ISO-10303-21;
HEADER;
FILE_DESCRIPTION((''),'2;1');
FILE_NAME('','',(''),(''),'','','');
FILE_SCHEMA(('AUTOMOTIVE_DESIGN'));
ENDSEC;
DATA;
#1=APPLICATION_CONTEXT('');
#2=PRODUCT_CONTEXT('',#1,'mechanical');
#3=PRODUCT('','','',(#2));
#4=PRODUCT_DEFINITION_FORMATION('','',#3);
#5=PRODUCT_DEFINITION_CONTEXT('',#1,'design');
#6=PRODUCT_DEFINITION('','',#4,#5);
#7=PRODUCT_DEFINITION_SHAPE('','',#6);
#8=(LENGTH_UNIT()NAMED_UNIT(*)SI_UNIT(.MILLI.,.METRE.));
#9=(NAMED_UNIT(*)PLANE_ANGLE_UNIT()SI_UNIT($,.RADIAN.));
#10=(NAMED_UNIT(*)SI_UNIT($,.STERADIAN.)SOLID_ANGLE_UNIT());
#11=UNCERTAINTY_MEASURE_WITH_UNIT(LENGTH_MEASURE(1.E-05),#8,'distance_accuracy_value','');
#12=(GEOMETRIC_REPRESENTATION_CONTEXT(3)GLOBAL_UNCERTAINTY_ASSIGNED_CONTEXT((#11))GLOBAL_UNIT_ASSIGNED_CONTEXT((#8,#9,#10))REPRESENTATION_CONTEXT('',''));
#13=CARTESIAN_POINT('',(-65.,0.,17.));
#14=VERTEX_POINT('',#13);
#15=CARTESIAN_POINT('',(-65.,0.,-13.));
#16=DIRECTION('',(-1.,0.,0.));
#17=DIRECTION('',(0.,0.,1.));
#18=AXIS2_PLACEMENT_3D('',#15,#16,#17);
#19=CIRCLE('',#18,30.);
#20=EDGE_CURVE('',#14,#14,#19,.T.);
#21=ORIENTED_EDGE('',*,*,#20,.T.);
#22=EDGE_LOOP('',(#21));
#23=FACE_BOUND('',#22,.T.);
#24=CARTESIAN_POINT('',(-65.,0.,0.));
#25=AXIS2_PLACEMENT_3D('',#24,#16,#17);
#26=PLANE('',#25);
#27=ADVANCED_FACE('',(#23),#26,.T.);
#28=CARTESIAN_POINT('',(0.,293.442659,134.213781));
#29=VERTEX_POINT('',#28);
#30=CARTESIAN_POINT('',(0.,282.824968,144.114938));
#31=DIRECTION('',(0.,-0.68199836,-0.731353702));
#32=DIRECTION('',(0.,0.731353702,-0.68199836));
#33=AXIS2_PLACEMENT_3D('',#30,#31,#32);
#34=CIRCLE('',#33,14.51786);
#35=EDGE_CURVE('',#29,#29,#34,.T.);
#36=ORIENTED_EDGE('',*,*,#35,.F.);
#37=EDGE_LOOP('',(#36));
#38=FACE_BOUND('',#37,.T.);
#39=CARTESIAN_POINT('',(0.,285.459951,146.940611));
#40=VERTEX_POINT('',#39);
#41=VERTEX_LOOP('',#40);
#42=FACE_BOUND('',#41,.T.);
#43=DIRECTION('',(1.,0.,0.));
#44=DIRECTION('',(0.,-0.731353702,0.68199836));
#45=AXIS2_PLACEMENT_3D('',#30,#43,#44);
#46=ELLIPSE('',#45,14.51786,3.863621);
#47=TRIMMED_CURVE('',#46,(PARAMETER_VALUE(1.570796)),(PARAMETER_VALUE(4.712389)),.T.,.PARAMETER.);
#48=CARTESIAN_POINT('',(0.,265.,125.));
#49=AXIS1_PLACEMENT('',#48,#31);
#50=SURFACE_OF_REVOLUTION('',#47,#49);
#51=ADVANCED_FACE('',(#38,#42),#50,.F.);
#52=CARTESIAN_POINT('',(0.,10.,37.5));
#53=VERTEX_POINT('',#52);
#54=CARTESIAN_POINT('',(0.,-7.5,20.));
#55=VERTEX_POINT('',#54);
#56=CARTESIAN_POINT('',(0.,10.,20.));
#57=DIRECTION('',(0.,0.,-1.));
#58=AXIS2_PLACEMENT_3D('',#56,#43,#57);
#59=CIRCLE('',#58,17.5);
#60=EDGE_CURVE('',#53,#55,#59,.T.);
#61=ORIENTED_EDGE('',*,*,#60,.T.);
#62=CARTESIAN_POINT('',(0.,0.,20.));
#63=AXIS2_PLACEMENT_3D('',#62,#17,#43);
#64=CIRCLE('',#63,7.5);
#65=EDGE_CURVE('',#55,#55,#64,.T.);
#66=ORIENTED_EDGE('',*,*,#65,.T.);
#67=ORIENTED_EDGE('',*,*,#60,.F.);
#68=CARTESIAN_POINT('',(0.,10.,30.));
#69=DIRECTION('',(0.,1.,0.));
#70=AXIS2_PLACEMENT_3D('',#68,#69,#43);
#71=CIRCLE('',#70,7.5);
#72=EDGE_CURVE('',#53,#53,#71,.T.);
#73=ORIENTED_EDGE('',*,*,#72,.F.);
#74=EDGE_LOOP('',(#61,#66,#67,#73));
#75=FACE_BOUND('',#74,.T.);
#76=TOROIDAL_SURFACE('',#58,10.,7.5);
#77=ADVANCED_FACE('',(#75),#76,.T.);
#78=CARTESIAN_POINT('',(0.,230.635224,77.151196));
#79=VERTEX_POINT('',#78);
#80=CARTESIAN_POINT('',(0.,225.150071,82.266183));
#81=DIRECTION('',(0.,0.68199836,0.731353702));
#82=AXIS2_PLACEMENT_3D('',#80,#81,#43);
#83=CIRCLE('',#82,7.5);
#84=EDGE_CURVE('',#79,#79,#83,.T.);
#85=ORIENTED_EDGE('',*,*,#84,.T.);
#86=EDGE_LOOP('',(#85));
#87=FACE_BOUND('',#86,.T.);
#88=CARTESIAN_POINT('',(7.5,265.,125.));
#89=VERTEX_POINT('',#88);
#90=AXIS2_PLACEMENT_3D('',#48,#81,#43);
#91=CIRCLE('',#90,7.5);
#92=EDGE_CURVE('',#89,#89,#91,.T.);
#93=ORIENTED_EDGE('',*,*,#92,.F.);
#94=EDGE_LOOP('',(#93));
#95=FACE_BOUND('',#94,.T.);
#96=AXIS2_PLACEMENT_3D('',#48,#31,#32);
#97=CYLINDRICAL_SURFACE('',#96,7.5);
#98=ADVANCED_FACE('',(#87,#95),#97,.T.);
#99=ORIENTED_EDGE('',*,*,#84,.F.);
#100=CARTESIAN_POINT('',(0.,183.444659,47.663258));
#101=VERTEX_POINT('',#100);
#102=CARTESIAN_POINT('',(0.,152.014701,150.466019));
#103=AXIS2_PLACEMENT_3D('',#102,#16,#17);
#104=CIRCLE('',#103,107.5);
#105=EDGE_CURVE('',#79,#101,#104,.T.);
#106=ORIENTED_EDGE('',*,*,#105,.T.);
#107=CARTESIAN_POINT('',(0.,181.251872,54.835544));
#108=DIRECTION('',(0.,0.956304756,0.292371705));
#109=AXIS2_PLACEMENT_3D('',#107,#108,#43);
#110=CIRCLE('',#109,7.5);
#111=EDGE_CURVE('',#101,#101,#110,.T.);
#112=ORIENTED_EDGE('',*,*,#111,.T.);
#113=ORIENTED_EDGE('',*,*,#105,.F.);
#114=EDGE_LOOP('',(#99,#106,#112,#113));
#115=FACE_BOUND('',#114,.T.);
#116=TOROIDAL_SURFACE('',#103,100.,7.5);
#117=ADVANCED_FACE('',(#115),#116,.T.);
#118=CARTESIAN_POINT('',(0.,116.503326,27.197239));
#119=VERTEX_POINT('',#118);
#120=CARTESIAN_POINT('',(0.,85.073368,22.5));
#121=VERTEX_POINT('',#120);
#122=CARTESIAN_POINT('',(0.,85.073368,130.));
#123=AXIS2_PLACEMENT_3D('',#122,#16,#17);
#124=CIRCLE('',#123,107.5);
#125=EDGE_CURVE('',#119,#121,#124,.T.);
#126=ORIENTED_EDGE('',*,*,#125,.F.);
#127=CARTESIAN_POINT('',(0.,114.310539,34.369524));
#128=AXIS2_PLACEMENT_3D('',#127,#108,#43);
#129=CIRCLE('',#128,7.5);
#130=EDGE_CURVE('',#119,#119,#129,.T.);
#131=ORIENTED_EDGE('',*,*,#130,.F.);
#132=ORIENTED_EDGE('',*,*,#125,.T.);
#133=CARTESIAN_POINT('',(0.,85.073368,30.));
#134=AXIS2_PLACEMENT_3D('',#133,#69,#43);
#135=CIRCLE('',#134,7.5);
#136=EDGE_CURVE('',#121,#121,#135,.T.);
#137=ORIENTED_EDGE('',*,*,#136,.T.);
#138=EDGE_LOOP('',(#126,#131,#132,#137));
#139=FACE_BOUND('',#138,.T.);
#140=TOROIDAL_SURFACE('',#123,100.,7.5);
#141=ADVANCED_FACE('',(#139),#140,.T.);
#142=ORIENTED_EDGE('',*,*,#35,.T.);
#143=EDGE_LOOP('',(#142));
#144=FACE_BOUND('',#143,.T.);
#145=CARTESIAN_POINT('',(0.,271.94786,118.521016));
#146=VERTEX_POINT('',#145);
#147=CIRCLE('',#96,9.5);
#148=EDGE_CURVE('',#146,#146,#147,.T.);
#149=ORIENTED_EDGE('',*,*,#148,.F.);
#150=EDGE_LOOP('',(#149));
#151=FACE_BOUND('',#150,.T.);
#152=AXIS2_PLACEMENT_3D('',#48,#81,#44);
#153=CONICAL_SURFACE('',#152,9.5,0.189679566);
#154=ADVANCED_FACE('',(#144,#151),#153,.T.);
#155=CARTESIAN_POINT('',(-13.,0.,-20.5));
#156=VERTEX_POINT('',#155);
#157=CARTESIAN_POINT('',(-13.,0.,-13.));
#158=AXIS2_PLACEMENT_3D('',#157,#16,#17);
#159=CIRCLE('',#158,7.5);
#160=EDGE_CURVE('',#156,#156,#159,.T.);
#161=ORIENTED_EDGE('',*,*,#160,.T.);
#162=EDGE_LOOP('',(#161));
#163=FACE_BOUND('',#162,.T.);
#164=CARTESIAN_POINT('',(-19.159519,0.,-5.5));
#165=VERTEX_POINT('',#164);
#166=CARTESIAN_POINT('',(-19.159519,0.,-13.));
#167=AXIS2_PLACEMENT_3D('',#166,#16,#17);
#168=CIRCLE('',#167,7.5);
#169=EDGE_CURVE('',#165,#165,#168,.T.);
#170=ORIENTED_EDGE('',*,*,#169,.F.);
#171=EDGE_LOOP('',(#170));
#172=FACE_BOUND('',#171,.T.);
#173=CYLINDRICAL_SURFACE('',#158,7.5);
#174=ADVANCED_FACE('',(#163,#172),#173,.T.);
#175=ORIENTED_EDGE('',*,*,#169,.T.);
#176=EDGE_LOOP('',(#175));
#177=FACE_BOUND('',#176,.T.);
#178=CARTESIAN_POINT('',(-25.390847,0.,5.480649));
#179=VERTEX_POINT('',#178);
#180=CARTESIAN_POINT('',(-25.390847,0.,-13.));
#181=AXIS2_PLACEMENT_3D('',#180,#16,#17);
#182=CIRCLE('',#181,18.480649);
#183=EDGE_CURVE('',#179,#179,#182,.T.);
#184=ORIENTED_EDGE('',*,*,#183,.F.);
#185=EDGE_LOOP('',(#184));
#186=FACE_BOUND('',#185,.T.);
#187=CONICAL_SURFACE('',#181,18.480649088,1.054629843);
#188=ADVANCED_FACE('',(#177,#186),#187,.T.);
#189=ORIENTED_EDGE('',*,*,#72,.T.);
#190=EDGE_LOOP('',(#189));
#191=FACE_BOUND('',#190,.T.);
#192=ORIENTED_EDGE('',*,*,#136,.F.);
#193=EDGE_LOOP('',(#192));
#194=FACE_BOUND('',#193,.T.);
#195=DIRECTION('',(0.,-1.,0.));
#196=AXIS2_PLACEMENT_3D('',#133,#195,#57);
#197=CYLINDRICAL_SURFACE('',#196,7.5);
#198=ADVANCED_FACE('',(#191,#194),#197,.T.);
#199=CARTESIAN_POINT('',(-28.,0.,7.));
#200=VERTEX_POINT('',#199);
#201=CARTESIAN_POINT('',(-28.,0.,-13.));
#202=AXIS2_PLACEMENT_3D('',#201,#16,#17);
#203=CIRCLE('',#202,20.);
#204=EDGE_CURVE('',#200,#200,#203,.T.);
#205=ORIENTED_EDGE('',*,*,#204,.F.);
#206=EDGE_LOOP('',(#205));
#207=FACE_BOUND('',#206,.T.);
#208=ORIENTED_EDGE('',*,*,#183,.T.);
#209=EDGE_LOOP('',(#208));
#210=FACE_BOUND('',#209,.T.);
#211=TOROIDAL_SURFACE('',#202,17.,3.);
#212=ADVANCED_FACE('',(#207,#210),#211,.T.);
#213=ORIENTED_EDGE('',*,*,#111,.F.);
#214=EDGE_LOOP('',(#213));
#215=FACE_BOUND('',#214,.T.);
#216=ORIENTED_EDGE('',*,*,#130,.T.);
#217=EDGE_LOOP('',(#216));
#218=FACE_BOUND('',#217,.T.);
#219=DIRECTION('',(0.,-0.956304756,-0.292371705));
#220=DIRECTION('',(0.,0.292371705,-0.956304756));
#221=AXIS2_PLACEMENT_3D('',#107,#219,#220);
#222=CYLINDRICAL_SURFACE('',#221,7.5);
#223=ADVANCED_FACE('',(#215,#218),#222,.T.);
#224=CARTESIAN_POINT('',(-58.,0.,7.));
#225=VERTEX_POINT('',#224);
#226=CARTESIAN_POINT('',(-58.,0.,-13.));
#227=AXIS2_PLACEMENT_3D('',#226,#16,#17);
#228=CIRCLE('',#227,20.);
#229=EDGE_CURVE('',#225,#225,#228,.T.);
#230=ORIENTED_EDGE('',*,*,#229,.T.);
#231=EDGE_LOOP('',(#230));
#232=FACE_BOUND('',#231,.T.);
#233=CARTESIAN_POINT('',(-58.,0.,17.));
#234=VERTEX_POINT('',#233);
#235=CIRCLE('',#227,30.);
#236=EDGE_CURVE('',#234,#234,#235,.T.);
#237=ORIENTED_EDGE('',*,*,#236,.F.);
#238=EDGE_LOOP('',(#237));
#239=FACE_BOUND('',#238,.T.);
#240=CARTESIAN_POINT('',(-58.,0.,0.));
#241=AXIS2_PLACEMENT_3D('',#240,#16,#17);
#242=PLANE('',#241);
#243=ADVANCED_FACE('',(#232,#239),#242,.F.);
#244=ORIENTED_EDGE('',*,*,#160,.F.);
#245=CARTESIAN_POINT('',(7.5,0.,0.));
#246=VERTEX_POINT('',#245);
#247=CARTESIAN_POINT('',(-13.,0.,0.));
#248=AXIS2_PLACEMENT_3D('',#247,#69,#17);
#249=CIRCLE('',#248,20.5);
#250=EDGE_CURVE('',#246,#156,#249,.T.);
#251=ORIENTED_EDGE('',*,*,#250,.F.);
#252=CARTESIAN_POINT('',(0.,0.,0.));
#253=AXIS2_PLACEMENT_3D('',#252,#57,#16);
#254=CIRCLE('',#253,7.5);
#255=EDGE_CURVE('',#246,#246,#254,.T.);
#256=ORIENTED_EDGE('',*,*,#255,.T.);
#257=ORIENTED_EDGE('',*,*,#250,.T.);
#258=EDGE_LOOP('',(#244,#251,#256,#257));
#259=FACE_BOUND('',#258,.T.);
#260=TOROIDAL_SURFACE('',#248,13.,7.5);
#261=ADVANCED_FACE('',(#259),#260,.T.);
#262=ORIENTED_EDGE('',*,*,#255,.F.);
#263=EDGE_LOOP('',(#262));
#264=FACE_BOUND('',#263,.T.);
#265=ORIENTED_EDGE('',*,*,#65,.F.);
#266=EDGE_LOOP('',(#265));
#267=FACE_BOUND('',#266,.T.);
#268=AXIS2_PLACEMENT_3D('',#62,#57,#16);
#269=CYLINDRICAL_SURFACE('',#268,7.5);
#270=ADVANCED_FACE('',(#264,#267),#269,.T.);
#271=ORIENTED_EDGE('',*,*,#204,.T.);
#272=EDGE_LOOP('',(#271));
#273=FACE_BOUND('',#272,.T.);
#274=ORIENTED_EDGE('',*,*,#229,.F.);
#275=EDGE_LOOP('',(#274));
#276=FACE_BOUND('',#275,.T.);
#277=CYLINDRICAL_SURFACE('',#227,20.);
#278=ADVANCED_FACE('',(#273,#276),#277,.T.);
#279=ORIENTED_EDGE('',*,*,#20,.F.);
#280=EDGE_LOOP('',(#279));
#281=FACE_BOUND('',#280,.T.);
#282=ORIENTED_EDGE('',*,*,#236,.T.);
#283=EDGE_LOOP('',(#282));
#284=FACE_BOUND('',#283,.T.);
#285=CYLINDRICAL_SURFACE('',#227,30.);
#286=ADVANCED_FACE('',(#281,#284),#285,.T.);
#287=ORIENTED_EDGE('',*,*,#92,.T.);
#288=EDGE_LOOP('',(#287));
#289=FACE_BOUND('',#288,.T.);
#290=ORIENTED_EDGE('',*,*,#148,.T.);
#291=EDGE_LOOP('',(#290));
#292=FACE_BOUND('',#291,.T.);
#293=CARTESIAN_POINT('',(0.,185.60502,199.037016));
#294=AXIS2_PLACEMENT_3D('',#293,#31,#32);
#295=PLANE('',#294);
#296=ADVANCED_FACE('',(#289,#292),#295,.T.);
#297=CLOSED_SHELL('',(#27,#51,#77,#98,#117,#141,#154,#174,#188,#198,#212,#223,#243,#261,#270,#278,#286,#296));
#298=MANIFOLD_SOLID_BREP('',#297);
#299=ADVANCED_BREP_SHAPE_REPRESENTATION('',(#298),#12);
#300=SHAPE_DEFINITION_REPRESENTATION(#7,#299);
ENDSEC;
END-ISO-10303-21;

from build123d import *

# Parameters (mm, degrees)
SKETCH2_R          = 7.5
SWEEP2_START       = -58
SWEEP2_OUTLINE_R   = 7.5
SWEEP2_DEPTH       = 45
SWEEP2_2_OUTLINE_R = 7.5
SWEEP2_2_ANGLE     = 90


with BuildPart() as part:
    # Sweep1: sweep along a path in Sketch1
    with BuildLine(Plane(origin=(0, 0, 0), x_dir=(0, 0, -1), z_dir=(1, 0, 0))) as sweep1_path:
        Line((-125, 265), (-82.266183324, 225.150071262))
        ThreePointArc((-82.266183324, 225.150071262), (-65.661209715, 205.006627523), (-54.835543734, 181.251871572))
        Line((-54.835543734, 181.251871572), (-34.369524404, 114.310538655))
        ThreePointArc((-34.369524404, 114.310538655), (-31.098413664, 99.854309295), (-30, 85.073368182))
        Line((-30, 85.073368182), (-30, 10))
        ThreePointArc((-30, 10), (-27.071067812, 2.928932188), (-20, 0))
        Line((-20, 0), (0, 0))
    # Sketch2 → Sweep1 (sweep)
    with BuildSketch(Plane.XY):
        Circle(SKETCH2_R)
    sweep(path=sweep1_path.line)

    # Sketch3 → Revolve1 (revolve)
    with BuildSketch(Plane(origin=(0, 0, 0), x_dir=(0, 0, -1), z_dir=(1, 0, 0))):
        with BuildLine():
            Line((-146.940611049, 285.459950802), (-125, 265))
            Line((-125, 265), (-118.521015579, 271.947860165))
            Line((-118.521015579, 271.947860165), (-133.977346338, 293.118807582))
            Line((-133.977346338, 293.118807582), (-134.213781062, 293.442658514))
            add(Edge.make_bspline(
                [(-134.213781062, 293.442658514), (-137.039454328, 296.077641462), (-146.940611049, 285.459950802)],
                knots=[3.152090242, 3.152090242, 3.152090242, 4.71238898, 4.71238898, 4.71238898], degree=2, weights=[0.958581046, 0.692308113, 1]))
        make_face()
    revolve(axis=Axis((0, 265, 125), (0, 0.6819983600624947, 0.731353701619174)))



with BuildPart() as body_2:
    # Sweep2: read off the stored shape, not the designer's step
    # Sweep2 outline → Sweep2 (new body)
    with BuildSketch(Plane.YZ.offset(SWEEP2_START)):
        with Locations((0, -13)):
            Circle(SWEEP2_OUTLINE_R)
    extrude(amount=SWEEP2_DEPTH)


with BuildPart() as part_1:
    add(part.part)

    add(body_2.part)  # Sweep2 2 merges body 2
    # Sweep2 2 outline → Sweep2 2 (revolve)
    with BuildSketch(Plane(origin=(-13, 0, 0), x_dir=(1, 0, 0), z_dir=(0, 0, 1))):
        with Locations((13, 0)):
            Circle(SWEEP2_2_OUTLINE_R)
    revolve(axis=Axis((-13, 0, 0), (0, 1, 0)), revolution_arc=SWEEP2_2_ANGLE)

    # Sketch6 → Revolve2 (revolve)
    with BuildSketch(Plane(origin=(0, 0, 0), x_dir=(1, 0, 0), z_dir=(0, 1, 0)), mode=Mode.PRIVATE) as revolve2_sk:
        with BuildLine():
            Line((-58, 33), (-58, 13))
            Line((-58, 13), (-25, 13))
            Line((-25, 13), (-25, 20.5))
            Line((-25, 20.5), (-19.159518744, 20.5))
            Line((-19.159518744, 20.5), (-25.39084721, 31.480649088))
            ThreePointArc((-25.39084721, 31.480649088), (-26.490355549, 32.592484066), (-28, 33))
            Line((-28, 33), (-58, 33))
        make_face()
        Polygon((-65, 13), (-58, 13), (-58, 33), (-58, 43), (-65, 43), align=None)
    revolve(revolve2_sk.sketch.rotate(Axis((-58, 0, -13), (1, 0, 0)), 180), axis=Axis((-58, 0, -13), (1, 0, 0)))


solid = part_1.part
